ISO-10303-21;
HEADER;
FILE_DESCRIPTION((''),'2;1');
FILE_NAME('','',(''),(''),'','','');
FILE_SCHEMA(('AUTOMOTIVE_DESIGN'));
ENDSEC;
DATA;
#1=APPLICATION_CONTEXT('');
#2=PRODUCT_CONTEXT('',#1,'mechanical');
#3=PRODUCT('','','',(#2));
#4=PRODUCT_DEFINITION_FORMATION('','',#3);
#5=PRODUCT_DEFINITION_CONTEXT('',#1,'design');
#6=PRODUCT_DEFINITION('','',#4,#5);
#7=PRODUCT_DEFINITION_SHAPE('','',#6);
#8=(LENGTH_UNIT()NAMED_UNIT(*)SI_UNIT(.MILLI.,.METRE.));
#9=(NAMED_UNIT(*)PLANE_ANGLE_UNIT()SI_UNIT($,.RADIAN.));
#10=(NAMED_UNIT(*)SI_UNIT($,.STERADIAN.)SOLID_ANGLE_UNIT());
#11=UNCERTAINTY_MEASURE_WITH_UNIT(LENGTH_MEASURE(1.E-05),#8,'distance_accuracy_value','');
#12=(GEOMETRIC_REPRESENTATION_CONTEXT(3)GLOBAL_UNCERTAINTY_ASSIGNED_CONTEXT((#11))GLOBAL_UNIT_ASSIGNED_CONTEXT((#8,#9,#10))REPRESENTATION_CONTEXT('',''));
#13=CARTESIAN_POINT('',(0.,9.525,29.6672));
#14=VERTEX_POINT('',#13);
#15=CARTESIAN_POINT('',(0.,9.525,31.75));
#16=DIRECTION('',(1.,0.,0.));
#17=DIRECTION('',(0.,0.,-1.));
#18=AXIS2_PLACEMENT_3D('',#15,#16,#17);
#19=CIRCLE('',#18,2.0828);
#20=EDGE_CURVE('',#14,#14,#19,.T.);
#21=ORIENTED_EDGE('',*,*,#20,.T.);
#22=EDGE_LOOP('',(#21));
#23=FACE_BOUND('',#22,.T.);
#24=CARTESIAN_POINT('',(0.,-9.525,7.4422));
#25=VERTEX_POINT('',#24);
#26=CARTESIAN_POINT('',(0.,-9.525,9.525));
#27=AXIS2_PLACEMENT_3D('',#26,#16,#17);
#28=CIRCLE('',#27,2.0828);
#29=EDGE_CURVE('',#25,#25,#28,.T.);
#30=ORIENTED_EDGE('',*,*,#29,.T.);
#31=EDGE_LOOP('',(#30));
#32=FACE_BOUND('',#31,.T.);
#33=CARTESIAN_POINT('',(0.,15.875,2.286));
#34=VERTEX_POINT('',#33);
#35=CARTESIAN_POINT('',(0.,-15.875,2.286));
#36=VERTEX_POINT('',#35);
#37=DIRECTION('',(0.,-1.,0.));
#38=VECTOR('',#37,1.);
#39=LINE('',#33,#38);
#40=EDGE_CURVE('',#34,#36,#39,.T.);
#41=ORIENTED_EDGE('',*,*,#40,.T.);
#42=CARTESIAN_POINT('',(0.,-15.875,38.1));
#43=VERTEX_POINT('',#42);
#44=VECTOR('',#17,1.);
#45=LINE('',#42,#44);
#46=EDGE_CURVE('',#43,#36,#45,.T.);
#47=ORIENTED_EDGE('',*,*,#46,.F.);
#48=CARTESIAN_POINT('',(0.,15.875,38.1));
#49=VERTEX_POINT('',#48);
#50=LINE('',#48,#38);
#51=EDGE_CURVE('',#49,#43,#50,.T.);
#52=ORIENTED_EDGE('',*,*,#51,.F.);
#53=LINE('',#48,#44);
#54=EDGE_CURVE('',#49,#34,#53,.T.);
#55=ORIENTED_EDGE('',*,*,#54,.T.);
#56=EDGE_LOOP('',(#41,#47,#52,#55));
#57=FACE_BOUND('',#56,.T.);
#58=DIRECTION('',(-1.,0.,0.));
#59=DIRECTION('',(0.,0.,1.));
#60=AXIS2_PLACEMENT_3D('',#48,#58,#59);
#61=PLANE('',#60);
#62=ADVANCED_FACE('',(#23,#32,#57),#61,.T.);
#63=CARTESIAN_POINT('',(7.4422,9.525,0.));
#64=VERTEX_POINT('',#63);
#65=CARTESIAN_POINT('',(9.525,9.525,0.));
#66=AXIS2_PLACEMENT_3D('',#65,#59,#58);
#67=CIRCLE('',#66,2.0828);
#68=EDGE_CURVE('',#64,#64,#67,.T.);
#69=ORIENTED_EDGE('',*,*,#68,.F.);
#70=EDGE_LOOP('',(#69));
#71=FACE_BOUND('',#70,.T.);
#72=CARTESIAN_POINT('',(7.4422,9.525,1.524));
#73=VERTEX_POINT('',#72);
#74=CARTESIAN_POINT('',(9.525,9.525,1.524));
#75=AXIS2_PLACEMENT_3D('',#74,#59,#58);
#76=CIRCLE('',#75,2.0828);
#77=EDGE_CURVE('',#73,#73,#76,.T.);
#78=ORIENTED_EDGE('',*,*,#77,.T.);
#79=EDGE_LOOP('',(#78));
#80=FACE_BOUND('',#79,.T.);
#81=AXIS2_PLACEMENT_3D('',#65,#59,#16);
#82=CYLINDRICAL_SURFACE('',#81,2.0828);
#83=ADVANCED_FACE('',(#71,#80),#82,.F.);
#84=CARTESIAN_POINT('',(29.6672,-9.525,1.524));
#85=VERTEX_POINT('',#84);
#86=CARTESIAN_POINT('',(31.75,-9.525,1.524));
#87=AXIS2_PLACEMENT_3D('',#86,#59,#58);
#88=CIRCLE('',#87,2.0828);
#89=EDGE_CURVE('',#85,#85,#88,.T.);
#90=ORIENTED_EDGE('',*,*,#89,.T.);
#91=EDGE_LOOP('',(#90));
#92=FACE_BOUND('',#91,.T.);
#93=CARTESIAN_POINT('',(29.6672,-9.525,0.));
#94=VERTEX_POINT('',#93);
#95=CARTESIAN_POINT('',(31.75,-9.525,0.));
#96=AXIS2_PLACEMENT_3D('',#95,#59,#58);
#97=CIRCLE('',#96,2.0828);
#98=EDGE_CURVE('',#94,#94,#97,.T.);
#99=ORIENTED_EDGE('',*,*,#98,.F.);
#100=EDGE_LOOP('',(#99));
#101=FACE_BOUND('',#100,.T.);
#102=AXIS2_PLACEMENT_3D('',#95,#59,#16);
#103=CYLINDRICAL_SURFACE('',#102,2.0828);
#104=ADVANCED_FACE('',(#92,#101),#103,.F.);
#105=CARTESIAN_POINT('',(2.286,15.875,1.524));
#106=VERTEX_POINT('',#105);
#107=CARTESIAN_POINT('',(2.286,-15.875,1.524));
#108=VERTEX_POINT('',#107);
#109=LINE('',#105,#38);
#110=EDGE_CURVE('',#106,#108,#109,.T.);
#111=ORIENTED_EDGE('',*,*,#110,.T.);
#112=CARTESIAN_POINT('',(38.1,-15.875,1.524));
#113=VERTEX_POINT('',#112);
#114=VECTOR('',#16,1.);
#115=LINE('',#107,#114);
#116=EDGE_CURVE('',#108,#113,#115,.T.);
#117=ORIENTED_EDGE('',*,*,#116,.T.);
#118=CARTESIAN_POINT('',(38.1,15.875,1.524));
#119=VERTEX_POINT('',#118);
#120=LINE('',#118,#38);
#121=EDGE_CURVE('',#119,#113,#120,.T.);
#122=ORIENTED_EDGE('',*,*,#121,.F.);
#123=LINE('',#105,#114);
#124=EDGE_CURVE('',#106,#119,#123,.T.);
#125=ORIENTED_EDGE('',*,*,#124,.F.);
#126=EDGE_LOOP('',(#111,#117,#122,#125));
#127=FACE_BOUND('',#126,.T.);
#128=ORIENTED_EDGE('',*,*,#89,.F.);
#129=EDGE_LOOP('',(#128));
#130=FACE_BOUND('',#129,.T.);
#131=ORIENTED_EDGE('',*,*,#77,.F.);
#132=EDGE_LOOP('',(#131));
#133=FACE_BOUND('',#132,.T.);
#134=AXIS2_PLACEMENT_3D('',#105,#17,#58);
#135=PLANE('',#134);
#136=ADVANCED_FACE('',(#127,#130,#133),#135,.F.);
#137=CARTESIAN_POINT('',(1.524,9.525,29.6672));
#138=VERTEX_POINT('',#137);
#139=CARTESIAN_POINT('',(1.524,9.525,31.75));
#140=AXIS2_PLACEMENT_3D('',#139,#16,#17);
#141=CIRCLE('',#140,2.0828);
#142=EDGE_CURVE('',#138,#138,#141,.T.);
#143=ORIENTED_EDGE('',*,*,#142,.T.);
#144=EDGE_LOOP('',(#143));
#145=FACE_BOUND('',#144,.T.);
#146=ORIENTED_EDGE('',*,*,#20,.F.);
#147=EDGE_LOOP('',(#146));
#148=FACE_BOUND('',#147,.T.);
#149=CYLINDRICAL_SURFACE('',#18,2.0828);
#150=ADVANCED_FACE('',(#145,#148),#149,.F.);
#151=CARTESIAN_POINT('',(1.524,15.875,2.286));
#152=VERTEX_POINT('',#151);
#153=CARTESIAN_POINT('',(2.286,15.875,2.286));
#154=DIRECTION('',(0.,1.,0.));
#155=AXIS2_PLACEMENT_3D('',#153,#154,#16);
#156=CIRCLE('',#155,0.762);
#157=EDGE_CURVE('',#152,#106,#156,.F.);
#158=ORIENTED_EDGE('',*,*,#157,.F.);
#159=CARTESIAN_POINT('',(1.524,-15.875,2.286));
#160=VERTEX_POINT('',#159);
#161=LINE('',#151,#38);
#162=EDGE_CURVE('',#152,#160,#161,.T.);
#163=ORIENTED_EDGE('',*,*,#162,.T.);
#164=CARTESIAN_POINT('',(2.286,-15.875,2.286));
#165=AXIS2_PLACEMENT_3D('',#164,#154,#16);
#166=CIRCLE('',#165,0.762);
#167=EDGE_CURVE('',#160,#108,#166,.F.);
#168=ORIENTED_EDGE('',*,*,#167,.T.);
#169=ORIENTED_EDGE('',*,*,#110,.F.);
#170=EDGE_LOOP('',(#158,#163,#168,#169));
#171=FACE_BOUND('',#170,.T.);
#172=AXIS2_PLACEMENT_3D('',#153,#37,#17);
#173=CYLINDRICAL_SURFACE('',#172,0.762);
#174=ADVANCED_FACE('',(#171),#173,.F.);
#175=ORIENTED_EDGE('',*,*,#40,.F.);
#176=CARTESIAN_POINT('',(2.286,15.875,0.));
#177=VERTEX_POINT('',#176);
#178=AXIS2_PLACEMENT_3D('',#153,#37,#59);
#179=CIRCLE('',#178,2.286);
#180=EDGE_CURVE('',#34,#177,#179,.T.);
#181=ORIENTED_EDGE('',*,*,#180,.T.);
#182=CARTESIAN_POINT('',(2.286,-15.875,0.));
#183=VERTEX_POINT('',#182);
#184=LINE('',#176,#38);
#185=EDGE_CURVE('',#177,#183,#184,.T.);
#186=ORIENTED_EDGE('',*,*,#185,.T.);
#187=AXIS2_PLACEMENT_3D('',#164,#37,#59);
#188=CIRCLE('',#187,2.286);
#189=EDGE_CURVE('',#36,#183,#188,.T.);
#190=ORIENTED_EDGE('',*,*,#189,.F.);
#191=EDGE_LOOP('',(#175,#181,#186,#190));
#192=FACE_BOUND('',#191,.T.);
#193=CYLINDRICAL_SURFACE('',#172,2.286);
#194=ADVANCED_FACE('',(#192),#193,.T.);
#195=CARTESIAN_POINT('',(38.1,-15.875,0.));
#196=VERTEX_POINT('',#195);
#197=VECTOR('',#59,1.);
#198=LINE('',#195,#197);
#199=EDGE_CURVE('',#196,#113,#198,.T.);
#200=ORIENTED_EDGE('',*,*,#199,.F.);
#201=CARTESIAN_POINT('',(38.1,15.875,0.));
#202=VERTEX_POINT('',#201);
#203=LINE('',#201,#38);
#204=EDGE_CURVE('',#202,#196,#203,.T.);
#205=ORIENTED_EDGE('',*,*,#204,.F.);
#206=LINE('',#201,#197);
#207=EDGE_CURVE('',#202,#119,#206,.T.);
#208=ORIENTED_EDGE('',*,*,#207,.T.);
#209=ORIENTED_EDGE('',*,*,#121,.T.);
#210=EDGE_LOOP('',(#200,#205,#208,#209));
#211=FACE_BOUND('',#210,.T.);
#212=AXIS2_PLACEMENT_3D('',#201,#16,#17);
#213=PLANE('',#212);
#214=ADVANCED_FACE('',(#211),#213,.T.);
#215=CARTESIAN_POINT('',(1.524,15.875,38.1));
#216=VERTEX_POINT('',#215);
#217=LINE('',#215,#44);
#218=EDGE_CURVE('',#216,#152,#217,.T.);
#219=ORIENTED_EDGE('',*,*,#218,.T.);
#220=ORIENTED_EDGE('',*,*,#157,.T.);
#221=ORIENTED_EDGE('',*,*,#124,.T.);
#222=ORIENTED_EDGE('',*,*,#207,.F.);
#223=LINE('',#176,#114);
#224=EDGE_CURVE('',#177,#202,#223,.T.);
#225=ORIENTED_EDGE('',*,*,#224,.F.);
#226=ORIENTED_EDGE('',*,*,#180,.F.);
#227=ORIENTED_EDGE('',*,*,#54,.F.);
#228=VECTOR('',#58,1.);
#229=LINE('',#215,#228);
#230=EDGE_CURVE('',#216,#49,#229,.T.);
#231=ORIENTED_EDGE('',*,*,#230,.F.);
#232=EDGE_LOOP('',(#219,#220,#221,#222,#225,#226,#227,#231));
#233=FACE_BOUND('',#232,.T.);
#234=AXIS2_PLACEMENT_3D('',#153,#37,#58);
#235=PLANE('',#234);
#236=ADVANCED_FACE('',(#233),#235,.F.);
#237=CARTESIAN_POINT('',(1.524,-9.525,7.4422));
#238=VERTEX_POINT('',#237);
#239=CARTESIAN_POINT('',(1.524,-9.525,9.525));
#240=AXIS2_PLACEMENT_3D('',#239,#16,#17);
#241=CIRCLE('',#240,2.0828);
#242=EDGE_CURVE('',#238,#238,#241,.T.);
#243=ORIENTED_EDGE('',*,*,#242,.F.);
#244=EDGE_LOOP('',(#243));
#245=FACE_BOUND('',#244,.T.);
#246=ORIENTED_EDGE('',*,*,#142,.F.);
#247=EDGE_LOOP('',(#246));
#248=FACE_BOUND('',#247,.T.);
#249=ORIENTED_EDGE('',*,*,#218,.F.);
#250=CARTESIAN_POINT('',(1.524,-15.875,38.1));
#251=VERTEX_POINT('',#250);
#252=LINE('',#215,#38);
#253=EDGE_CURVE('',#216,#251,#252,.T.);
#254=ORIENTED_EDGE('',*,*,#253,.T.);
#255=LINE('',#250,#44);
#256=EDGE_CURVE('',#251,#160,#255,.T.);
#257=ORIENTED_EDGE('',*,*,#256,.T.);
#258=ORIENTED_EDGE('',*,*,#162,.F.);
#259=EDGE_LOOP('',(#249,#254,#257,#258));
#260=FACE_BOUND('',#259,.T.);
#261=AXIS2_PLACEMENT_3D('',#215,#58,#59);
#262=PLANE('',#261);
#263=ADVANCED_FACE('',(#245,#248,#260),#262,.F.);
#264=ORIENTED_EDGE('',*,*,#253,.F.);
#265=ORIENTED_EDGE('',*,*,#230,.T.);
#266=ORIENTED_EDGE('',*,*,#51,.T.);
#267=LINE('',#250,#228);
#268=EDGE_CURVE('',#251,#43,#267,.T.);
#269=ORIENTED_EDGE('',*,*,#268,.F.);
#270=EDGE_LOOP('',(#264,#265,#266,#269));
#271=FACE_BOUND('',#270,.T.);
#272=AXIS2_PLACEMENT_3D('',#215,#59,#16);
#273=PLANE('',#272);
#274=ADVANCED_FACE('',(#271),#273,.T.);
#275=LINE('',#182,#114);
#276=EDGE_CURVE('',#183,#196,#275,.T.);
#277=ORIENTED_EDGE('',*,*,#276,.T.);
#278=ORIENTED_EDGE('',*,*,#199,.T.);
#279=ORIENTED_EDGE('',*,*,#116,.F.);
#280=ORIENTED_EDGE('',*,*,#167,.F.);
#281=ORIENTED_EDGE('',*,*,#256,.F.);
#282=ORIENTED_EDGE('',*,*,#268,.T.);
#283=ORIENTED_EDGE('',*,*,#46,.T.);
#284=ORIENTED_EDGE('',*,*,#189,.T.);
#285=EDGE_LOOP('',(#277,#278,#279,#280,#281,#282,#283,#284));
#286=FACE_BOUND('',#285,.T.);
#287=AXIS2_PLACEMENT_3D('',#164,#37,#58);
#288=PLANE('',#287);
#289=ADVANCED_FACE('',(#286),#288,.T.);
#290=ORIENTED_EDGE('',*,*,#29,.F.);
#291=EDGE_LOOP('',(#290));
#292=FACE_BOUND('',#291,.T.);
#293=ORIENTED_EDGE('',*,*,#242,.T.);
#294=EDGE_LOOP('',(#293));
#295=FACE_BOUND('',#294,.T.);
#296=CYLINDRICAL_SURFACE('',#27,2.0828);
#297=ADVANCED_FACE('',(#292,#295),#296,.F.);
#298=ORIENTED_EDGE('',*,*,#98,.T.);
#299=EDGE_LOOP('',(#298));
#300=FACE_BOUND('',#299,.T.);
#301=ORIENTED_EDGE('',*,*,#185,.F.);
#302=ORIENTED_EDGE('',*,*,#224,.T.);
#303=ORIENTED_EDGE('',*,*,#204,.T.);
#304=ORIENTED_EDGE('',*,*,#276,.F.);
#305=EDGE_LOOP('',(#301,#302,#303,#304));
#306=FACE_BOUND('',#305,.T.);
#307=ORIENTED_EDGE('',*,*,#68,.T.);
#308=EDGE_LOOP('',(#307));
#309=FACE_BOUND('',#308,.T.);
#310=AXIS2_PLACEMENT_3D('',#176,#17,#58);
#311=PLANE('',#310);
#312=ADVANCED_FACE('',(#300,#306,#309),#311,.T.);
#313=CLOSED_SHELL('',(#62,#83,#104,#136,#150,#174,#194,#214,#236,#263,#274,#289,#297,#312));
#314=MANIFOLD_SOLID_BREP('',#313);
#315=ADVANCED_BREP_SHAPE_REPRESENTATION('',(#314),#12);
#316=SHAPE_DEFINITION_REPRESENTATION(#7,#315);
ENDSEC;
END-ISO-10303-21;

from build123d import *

# Parameters (mm, degrees)
EXTRUDE_THIN1_START = -15.875
EXTRUDE_THIN1_DEPTH = 31.75
SKETCH4_R           = 2.0828
EXTRUDE3_DEPTH      = 56.149155941
CIRPATTERN1_COUNT   = 2


# Read off the part's stored shape, not the designer's step: Extrude-Thin1
with BuildPart() as part:
    # Extrude-Thin1 outline → Extrude-Thin1 (new body)
    with BuildSketch(Plane(origin=(0, 0, 0), x_dir=(1, 0, 0), z_dir=(0, 1, 0)).offset(EXTRUDE_THIN1_START)):
        with BuildLine():
            Line((2.286, -1.524), (38.1, -1.524))
            Line((38.1, -1.524), (38.1, 0))
            Line((38.1, 0), (2.286, 0))
            ThreePointArc((2.286, 0), (0.669553898, -0.669553898), (0, -2.286))
            Line((0, -2.286), (0, -38.1))
            Line((0, -38.1), (1.524, -38.1))
            Line((1.524, -38.1), (1.524, -2.286))
            ThreePointArc((1.524, -2.286), (1.747184633, -1.747184633), (2.286, -1.524))
        make_face()
    extrude(amount=EXTRUDE_THIN1_DEPTH)

    # Sketch4 → Extrude3 (cut, through all)
    with BuildSketch(Plane(origin=(1.524, 0, 0), x_dir=(0, 0, -1), z_dir=(1, 0, 0))):
        with Locations((-31.75, 60.325)):
            Circle(SKETCH4_R)
        with Locations((-9.525, 41.275)):
            Circle(SKETCH4_R)
        with Locations((-9.525, -9.525)):
            Circle(SKETCH4_R)
        with Locations((-31.75, 9.525)):
            Circle(SKETCH4_R)
    extrude3 = extrude(amount=-EXTRUDE3_DEPTH, mode=Mode.SUBTRACT)

    # CirPattern1: Extrude3 ×2 about axis
    cirpattern1_axis = Axis((0, 0, 0), (0.7071067811865464, 0, 0.7071067811865487))
    for i in range(1, CIRPATTERN1_COUNT):
        add(extrude3.rotate(cirpattern1_axis, i * 360 / CIRPATTERN1_COUNT), mode=Mode.SUBTRACT)


solid = part.part
